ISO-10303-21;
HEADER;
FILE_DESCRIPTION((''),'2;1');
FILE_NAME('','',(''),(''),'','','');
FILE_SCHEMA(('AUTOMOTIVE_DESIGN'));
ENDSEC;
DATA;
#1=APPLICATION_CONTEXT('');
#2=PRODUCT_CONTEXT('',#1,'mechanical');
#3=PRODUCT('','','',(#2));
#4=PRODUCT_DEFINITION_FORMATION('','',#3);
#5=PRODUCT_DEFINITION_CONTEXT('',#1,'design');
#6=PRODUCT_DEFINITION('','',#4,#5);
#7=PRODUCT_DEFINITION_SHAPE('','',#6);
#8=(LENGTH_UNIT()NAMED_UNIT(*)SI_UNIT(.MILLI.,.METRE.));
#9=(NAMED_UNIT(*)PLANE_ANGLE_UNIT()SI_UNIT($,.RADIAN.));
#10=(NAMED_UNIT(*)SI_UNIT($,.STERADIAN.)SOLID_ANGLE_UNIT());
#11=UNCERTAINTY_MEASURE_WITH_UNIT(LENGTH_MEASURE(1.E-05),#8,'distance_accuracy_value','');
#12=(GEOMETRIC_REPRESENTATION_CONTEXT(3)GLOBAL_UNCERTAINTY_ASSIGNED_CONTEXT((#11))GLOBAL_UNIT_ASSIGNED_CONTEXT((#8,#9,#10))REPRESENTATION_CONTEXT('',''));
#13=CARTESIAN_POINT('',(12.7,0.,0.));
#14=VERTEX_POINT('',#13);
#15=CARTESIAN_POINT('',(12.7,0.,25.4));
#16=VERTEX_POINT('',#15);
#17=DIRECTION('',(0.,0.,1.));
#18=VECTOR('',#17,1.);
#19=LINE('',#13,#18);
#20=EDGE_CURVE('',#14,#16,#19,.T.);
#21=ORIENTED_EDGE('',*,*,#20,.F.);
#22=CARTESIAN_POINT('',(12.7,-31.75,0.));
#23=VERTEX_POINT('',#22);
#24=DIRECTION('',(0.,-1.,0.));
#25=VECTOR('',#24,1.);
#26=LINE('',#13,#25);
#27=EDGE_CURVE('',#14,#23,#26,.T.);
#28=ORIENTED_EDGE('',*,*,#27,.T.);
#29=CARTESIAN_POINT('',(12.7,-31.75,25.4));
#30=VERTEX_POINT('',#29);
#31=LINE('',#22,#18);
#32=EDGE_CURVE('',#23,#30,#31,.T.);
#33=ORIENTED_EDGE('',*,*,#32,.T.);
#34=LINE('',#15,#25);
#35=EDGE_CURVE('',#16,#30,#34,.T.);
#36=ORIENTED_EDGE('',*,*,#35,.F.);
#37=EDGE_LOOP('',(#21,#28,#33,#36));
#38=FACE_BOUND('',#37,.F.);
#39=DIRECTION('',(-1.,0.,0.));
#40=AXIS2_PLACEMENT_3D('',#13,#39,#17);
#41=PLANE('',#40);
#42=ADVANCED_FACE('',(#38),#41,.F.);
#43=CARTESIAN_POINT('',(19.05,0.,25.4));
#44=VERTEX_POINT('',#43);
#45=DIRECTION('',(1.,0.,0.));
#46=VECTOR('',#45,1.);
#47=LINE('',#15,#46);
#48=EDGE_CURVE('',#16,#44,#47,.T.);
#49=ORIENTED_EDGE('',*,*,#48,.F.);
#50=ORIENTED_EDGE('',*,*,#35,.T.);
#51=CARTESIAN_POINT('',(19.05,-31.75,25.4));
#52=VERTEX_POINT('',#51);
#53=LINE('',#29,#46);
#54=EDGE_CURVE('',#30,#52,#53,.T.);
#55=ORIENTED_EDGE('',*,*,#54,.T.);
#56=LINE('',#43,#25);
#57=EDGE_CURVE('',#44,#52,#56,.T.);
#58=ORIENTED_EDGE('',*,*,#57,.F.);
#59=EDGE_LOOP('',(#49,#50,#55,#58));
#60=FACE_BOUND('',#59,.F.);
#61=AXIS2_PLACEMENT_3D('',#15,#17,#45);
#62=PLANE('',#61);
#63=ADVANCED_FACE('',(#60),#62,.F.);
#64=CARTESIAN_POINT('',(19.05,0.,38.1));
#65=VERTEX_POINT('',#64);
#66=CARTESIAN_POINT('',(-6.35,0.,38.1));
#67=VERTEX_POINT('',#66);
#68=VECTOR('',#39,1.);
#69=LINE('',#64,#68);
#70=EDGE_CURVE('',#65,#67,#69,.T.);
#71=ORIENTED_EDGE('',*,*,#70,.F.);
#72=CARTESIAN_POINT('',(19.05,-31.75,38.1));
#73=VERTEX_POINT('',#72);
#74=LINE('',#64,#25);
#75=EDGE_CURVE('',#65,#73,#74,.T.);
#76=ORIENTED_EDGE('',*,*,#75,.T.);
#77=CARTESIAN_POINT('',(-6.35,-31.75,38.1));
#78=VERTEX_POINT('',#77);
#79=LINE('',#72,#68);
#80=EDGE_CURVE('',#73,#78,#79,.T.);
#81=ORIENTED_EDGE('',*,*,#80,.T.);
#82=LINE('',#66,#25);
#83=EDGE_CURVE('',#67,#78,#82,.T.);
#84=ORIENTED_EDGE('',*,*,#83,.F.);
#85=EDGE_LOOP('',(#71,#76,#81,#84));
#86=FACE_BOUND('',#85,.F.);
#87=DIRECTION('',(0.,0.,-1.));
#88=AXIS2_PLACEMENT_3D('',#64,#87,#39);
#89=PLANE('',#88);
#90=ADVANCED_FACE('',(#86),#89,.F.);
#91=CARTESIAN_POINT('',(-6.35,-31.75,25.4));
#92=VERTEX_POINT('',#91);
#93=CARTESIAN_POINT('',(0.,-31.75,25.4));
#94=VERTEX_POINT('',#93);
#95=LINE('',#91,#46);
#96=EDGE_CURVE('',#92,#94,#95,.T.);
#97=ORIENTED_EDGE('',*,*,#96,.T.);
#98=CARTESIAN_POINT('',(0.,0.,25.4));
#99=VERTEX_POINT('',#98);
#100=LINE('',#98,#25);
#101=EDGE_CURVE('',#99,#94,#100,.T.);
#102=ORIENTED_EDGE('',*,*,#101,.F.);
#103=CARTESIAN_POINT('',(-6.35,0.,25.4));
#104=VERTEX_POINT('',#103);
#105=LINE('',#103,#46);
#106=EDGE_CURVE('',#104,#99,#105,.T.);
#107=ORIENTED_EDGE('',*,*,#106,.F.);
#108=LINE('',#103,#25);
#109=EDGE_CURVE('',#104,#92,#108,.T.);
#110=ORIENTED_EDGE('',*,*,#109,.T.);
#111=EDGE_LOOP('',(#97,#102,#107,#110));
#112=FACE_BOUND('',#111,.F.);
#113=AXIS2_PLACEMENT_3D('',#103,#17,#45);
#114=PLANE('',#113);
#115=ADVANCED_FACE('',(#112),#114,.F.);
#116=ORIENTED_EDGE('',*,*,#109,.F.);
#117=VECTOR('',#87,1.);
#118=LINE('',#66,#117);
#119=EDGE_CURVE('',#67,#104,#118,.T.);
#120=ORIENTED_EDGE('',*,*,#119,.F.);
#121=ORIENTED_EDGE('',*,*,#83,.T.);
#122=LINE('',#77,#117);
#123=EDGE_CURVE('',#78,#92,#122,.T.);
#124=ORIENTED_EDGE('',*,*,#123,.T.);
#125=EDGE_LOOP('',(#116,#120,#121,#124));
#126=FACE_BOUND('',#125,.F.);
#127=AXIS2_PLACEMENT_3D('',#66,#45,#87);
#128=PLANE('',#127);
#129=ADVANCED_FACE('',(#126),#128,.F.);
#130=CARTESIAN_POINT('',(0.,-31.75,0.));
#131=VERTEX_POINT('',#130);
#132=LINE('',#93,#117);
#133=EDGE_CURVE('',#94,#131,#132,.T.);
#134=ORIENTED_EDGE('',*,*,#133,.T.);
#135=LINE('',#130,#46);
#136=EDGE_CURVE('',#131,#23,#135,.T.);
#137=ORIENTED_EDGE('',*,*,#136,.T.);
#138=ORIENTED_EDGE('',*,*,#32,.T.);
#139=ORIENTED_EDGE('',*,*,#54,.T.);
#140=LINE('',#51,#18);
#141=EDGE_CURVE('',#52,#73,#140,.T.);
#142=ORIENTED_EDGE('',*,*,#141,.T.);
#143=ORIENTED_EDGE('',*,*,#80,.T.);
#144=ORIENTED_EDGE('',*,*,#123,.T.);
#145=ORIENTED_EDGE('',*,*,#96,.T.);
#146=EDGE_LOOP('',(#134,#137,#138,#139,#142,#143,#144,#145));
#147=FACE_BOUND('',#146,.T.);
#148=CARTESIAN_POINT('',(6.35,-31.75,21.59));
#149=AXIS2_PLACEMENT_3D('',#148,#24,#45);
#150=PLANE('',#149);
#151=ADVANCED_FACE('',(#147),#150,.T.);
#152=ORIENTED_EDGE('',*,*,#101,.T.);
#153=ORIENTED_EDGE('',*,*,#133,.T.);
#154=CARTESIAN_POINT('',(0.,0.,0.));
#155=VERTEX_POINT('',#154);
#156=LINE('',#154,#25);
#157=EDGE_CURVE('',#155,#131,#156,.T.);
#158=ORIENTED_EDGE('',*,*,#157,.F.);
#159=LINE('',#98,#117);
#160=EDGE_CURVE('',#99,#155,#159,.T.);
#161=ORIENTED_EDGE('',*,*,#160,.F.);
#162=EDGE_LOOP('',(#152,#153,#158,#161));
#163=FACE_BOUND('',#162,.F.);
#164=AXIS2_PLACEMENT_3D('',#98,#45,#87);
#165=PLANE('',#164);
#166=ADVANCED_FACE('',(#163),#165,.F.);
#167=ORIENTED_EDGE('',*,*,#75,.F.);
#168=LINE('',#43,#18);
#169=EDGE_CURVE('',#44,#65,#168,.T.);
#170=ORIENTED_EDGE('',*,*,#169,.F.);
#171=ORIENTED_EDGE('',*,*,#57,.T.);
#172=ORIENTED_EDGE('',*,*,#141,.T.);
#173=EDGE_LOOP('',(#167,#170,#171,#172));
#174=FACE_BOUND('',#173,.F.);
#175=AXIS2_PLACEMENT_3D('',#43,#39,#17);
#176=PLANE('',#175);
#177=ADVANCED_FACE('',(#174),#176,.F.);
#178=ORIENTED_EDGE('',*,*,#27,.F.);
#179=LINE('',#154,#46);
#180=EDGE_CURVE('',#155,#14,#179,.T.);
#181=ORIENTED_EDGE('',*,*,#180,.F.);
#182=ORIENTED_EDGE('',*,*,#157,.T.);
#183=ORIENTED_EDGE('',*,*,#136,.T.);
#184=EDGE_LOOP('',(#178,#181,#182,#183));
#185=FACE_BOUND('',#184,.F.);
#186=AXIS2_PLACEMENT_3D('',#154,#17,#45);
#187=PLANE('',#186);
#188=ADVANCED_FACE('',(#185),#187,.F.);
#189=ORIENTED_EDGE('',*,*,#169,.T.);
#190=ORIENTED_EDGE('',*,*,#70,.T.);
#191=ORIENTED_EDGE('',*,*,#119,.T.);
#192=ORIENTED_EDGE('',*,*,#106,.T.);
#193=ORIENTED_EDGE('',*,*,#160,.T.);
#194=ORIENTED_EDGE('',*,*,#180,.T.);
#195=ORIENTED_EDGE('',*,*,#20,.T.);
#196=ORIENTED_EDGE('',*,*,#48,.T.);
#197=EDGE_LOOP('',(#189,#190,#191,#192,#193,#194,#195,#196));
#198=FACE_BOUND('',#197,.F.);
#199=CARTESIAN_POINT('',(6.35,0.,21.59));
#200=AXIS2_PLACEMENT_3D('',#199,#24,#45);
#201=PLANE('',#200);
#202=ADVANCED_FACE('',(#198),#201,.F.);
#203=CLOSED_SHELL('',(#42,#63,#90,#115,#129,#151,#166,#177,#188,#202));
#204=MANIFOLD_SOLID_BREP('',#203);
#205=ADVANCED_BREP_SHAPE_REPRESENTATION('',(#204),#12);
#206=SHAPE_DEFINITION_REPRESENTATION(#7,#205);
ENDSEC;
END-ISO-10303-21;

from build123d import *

# Parameters (mm, degrees)
F1_DEPTH = 31.75


# Not quite as in the source:
# - a length typed as a fraction of an inch, garbled in the dataset ("3 / 203.2 mm" for 3/8 in), is restored


with BuildPart() as f1:
    # F0 (on Front) → F1 (new body)
    with BuildSketch(Plane.XZ):
        Polygon((0, 0), (12.7, 0), (12.7, 25.4), (19.05, 25.4), (19.05, 38.1), (-6.35, 38.1), (-6.35, 25.4), (0, 25.4), align=None)
    extrude(amount=F1_DEPTH)


solid = f1.part
